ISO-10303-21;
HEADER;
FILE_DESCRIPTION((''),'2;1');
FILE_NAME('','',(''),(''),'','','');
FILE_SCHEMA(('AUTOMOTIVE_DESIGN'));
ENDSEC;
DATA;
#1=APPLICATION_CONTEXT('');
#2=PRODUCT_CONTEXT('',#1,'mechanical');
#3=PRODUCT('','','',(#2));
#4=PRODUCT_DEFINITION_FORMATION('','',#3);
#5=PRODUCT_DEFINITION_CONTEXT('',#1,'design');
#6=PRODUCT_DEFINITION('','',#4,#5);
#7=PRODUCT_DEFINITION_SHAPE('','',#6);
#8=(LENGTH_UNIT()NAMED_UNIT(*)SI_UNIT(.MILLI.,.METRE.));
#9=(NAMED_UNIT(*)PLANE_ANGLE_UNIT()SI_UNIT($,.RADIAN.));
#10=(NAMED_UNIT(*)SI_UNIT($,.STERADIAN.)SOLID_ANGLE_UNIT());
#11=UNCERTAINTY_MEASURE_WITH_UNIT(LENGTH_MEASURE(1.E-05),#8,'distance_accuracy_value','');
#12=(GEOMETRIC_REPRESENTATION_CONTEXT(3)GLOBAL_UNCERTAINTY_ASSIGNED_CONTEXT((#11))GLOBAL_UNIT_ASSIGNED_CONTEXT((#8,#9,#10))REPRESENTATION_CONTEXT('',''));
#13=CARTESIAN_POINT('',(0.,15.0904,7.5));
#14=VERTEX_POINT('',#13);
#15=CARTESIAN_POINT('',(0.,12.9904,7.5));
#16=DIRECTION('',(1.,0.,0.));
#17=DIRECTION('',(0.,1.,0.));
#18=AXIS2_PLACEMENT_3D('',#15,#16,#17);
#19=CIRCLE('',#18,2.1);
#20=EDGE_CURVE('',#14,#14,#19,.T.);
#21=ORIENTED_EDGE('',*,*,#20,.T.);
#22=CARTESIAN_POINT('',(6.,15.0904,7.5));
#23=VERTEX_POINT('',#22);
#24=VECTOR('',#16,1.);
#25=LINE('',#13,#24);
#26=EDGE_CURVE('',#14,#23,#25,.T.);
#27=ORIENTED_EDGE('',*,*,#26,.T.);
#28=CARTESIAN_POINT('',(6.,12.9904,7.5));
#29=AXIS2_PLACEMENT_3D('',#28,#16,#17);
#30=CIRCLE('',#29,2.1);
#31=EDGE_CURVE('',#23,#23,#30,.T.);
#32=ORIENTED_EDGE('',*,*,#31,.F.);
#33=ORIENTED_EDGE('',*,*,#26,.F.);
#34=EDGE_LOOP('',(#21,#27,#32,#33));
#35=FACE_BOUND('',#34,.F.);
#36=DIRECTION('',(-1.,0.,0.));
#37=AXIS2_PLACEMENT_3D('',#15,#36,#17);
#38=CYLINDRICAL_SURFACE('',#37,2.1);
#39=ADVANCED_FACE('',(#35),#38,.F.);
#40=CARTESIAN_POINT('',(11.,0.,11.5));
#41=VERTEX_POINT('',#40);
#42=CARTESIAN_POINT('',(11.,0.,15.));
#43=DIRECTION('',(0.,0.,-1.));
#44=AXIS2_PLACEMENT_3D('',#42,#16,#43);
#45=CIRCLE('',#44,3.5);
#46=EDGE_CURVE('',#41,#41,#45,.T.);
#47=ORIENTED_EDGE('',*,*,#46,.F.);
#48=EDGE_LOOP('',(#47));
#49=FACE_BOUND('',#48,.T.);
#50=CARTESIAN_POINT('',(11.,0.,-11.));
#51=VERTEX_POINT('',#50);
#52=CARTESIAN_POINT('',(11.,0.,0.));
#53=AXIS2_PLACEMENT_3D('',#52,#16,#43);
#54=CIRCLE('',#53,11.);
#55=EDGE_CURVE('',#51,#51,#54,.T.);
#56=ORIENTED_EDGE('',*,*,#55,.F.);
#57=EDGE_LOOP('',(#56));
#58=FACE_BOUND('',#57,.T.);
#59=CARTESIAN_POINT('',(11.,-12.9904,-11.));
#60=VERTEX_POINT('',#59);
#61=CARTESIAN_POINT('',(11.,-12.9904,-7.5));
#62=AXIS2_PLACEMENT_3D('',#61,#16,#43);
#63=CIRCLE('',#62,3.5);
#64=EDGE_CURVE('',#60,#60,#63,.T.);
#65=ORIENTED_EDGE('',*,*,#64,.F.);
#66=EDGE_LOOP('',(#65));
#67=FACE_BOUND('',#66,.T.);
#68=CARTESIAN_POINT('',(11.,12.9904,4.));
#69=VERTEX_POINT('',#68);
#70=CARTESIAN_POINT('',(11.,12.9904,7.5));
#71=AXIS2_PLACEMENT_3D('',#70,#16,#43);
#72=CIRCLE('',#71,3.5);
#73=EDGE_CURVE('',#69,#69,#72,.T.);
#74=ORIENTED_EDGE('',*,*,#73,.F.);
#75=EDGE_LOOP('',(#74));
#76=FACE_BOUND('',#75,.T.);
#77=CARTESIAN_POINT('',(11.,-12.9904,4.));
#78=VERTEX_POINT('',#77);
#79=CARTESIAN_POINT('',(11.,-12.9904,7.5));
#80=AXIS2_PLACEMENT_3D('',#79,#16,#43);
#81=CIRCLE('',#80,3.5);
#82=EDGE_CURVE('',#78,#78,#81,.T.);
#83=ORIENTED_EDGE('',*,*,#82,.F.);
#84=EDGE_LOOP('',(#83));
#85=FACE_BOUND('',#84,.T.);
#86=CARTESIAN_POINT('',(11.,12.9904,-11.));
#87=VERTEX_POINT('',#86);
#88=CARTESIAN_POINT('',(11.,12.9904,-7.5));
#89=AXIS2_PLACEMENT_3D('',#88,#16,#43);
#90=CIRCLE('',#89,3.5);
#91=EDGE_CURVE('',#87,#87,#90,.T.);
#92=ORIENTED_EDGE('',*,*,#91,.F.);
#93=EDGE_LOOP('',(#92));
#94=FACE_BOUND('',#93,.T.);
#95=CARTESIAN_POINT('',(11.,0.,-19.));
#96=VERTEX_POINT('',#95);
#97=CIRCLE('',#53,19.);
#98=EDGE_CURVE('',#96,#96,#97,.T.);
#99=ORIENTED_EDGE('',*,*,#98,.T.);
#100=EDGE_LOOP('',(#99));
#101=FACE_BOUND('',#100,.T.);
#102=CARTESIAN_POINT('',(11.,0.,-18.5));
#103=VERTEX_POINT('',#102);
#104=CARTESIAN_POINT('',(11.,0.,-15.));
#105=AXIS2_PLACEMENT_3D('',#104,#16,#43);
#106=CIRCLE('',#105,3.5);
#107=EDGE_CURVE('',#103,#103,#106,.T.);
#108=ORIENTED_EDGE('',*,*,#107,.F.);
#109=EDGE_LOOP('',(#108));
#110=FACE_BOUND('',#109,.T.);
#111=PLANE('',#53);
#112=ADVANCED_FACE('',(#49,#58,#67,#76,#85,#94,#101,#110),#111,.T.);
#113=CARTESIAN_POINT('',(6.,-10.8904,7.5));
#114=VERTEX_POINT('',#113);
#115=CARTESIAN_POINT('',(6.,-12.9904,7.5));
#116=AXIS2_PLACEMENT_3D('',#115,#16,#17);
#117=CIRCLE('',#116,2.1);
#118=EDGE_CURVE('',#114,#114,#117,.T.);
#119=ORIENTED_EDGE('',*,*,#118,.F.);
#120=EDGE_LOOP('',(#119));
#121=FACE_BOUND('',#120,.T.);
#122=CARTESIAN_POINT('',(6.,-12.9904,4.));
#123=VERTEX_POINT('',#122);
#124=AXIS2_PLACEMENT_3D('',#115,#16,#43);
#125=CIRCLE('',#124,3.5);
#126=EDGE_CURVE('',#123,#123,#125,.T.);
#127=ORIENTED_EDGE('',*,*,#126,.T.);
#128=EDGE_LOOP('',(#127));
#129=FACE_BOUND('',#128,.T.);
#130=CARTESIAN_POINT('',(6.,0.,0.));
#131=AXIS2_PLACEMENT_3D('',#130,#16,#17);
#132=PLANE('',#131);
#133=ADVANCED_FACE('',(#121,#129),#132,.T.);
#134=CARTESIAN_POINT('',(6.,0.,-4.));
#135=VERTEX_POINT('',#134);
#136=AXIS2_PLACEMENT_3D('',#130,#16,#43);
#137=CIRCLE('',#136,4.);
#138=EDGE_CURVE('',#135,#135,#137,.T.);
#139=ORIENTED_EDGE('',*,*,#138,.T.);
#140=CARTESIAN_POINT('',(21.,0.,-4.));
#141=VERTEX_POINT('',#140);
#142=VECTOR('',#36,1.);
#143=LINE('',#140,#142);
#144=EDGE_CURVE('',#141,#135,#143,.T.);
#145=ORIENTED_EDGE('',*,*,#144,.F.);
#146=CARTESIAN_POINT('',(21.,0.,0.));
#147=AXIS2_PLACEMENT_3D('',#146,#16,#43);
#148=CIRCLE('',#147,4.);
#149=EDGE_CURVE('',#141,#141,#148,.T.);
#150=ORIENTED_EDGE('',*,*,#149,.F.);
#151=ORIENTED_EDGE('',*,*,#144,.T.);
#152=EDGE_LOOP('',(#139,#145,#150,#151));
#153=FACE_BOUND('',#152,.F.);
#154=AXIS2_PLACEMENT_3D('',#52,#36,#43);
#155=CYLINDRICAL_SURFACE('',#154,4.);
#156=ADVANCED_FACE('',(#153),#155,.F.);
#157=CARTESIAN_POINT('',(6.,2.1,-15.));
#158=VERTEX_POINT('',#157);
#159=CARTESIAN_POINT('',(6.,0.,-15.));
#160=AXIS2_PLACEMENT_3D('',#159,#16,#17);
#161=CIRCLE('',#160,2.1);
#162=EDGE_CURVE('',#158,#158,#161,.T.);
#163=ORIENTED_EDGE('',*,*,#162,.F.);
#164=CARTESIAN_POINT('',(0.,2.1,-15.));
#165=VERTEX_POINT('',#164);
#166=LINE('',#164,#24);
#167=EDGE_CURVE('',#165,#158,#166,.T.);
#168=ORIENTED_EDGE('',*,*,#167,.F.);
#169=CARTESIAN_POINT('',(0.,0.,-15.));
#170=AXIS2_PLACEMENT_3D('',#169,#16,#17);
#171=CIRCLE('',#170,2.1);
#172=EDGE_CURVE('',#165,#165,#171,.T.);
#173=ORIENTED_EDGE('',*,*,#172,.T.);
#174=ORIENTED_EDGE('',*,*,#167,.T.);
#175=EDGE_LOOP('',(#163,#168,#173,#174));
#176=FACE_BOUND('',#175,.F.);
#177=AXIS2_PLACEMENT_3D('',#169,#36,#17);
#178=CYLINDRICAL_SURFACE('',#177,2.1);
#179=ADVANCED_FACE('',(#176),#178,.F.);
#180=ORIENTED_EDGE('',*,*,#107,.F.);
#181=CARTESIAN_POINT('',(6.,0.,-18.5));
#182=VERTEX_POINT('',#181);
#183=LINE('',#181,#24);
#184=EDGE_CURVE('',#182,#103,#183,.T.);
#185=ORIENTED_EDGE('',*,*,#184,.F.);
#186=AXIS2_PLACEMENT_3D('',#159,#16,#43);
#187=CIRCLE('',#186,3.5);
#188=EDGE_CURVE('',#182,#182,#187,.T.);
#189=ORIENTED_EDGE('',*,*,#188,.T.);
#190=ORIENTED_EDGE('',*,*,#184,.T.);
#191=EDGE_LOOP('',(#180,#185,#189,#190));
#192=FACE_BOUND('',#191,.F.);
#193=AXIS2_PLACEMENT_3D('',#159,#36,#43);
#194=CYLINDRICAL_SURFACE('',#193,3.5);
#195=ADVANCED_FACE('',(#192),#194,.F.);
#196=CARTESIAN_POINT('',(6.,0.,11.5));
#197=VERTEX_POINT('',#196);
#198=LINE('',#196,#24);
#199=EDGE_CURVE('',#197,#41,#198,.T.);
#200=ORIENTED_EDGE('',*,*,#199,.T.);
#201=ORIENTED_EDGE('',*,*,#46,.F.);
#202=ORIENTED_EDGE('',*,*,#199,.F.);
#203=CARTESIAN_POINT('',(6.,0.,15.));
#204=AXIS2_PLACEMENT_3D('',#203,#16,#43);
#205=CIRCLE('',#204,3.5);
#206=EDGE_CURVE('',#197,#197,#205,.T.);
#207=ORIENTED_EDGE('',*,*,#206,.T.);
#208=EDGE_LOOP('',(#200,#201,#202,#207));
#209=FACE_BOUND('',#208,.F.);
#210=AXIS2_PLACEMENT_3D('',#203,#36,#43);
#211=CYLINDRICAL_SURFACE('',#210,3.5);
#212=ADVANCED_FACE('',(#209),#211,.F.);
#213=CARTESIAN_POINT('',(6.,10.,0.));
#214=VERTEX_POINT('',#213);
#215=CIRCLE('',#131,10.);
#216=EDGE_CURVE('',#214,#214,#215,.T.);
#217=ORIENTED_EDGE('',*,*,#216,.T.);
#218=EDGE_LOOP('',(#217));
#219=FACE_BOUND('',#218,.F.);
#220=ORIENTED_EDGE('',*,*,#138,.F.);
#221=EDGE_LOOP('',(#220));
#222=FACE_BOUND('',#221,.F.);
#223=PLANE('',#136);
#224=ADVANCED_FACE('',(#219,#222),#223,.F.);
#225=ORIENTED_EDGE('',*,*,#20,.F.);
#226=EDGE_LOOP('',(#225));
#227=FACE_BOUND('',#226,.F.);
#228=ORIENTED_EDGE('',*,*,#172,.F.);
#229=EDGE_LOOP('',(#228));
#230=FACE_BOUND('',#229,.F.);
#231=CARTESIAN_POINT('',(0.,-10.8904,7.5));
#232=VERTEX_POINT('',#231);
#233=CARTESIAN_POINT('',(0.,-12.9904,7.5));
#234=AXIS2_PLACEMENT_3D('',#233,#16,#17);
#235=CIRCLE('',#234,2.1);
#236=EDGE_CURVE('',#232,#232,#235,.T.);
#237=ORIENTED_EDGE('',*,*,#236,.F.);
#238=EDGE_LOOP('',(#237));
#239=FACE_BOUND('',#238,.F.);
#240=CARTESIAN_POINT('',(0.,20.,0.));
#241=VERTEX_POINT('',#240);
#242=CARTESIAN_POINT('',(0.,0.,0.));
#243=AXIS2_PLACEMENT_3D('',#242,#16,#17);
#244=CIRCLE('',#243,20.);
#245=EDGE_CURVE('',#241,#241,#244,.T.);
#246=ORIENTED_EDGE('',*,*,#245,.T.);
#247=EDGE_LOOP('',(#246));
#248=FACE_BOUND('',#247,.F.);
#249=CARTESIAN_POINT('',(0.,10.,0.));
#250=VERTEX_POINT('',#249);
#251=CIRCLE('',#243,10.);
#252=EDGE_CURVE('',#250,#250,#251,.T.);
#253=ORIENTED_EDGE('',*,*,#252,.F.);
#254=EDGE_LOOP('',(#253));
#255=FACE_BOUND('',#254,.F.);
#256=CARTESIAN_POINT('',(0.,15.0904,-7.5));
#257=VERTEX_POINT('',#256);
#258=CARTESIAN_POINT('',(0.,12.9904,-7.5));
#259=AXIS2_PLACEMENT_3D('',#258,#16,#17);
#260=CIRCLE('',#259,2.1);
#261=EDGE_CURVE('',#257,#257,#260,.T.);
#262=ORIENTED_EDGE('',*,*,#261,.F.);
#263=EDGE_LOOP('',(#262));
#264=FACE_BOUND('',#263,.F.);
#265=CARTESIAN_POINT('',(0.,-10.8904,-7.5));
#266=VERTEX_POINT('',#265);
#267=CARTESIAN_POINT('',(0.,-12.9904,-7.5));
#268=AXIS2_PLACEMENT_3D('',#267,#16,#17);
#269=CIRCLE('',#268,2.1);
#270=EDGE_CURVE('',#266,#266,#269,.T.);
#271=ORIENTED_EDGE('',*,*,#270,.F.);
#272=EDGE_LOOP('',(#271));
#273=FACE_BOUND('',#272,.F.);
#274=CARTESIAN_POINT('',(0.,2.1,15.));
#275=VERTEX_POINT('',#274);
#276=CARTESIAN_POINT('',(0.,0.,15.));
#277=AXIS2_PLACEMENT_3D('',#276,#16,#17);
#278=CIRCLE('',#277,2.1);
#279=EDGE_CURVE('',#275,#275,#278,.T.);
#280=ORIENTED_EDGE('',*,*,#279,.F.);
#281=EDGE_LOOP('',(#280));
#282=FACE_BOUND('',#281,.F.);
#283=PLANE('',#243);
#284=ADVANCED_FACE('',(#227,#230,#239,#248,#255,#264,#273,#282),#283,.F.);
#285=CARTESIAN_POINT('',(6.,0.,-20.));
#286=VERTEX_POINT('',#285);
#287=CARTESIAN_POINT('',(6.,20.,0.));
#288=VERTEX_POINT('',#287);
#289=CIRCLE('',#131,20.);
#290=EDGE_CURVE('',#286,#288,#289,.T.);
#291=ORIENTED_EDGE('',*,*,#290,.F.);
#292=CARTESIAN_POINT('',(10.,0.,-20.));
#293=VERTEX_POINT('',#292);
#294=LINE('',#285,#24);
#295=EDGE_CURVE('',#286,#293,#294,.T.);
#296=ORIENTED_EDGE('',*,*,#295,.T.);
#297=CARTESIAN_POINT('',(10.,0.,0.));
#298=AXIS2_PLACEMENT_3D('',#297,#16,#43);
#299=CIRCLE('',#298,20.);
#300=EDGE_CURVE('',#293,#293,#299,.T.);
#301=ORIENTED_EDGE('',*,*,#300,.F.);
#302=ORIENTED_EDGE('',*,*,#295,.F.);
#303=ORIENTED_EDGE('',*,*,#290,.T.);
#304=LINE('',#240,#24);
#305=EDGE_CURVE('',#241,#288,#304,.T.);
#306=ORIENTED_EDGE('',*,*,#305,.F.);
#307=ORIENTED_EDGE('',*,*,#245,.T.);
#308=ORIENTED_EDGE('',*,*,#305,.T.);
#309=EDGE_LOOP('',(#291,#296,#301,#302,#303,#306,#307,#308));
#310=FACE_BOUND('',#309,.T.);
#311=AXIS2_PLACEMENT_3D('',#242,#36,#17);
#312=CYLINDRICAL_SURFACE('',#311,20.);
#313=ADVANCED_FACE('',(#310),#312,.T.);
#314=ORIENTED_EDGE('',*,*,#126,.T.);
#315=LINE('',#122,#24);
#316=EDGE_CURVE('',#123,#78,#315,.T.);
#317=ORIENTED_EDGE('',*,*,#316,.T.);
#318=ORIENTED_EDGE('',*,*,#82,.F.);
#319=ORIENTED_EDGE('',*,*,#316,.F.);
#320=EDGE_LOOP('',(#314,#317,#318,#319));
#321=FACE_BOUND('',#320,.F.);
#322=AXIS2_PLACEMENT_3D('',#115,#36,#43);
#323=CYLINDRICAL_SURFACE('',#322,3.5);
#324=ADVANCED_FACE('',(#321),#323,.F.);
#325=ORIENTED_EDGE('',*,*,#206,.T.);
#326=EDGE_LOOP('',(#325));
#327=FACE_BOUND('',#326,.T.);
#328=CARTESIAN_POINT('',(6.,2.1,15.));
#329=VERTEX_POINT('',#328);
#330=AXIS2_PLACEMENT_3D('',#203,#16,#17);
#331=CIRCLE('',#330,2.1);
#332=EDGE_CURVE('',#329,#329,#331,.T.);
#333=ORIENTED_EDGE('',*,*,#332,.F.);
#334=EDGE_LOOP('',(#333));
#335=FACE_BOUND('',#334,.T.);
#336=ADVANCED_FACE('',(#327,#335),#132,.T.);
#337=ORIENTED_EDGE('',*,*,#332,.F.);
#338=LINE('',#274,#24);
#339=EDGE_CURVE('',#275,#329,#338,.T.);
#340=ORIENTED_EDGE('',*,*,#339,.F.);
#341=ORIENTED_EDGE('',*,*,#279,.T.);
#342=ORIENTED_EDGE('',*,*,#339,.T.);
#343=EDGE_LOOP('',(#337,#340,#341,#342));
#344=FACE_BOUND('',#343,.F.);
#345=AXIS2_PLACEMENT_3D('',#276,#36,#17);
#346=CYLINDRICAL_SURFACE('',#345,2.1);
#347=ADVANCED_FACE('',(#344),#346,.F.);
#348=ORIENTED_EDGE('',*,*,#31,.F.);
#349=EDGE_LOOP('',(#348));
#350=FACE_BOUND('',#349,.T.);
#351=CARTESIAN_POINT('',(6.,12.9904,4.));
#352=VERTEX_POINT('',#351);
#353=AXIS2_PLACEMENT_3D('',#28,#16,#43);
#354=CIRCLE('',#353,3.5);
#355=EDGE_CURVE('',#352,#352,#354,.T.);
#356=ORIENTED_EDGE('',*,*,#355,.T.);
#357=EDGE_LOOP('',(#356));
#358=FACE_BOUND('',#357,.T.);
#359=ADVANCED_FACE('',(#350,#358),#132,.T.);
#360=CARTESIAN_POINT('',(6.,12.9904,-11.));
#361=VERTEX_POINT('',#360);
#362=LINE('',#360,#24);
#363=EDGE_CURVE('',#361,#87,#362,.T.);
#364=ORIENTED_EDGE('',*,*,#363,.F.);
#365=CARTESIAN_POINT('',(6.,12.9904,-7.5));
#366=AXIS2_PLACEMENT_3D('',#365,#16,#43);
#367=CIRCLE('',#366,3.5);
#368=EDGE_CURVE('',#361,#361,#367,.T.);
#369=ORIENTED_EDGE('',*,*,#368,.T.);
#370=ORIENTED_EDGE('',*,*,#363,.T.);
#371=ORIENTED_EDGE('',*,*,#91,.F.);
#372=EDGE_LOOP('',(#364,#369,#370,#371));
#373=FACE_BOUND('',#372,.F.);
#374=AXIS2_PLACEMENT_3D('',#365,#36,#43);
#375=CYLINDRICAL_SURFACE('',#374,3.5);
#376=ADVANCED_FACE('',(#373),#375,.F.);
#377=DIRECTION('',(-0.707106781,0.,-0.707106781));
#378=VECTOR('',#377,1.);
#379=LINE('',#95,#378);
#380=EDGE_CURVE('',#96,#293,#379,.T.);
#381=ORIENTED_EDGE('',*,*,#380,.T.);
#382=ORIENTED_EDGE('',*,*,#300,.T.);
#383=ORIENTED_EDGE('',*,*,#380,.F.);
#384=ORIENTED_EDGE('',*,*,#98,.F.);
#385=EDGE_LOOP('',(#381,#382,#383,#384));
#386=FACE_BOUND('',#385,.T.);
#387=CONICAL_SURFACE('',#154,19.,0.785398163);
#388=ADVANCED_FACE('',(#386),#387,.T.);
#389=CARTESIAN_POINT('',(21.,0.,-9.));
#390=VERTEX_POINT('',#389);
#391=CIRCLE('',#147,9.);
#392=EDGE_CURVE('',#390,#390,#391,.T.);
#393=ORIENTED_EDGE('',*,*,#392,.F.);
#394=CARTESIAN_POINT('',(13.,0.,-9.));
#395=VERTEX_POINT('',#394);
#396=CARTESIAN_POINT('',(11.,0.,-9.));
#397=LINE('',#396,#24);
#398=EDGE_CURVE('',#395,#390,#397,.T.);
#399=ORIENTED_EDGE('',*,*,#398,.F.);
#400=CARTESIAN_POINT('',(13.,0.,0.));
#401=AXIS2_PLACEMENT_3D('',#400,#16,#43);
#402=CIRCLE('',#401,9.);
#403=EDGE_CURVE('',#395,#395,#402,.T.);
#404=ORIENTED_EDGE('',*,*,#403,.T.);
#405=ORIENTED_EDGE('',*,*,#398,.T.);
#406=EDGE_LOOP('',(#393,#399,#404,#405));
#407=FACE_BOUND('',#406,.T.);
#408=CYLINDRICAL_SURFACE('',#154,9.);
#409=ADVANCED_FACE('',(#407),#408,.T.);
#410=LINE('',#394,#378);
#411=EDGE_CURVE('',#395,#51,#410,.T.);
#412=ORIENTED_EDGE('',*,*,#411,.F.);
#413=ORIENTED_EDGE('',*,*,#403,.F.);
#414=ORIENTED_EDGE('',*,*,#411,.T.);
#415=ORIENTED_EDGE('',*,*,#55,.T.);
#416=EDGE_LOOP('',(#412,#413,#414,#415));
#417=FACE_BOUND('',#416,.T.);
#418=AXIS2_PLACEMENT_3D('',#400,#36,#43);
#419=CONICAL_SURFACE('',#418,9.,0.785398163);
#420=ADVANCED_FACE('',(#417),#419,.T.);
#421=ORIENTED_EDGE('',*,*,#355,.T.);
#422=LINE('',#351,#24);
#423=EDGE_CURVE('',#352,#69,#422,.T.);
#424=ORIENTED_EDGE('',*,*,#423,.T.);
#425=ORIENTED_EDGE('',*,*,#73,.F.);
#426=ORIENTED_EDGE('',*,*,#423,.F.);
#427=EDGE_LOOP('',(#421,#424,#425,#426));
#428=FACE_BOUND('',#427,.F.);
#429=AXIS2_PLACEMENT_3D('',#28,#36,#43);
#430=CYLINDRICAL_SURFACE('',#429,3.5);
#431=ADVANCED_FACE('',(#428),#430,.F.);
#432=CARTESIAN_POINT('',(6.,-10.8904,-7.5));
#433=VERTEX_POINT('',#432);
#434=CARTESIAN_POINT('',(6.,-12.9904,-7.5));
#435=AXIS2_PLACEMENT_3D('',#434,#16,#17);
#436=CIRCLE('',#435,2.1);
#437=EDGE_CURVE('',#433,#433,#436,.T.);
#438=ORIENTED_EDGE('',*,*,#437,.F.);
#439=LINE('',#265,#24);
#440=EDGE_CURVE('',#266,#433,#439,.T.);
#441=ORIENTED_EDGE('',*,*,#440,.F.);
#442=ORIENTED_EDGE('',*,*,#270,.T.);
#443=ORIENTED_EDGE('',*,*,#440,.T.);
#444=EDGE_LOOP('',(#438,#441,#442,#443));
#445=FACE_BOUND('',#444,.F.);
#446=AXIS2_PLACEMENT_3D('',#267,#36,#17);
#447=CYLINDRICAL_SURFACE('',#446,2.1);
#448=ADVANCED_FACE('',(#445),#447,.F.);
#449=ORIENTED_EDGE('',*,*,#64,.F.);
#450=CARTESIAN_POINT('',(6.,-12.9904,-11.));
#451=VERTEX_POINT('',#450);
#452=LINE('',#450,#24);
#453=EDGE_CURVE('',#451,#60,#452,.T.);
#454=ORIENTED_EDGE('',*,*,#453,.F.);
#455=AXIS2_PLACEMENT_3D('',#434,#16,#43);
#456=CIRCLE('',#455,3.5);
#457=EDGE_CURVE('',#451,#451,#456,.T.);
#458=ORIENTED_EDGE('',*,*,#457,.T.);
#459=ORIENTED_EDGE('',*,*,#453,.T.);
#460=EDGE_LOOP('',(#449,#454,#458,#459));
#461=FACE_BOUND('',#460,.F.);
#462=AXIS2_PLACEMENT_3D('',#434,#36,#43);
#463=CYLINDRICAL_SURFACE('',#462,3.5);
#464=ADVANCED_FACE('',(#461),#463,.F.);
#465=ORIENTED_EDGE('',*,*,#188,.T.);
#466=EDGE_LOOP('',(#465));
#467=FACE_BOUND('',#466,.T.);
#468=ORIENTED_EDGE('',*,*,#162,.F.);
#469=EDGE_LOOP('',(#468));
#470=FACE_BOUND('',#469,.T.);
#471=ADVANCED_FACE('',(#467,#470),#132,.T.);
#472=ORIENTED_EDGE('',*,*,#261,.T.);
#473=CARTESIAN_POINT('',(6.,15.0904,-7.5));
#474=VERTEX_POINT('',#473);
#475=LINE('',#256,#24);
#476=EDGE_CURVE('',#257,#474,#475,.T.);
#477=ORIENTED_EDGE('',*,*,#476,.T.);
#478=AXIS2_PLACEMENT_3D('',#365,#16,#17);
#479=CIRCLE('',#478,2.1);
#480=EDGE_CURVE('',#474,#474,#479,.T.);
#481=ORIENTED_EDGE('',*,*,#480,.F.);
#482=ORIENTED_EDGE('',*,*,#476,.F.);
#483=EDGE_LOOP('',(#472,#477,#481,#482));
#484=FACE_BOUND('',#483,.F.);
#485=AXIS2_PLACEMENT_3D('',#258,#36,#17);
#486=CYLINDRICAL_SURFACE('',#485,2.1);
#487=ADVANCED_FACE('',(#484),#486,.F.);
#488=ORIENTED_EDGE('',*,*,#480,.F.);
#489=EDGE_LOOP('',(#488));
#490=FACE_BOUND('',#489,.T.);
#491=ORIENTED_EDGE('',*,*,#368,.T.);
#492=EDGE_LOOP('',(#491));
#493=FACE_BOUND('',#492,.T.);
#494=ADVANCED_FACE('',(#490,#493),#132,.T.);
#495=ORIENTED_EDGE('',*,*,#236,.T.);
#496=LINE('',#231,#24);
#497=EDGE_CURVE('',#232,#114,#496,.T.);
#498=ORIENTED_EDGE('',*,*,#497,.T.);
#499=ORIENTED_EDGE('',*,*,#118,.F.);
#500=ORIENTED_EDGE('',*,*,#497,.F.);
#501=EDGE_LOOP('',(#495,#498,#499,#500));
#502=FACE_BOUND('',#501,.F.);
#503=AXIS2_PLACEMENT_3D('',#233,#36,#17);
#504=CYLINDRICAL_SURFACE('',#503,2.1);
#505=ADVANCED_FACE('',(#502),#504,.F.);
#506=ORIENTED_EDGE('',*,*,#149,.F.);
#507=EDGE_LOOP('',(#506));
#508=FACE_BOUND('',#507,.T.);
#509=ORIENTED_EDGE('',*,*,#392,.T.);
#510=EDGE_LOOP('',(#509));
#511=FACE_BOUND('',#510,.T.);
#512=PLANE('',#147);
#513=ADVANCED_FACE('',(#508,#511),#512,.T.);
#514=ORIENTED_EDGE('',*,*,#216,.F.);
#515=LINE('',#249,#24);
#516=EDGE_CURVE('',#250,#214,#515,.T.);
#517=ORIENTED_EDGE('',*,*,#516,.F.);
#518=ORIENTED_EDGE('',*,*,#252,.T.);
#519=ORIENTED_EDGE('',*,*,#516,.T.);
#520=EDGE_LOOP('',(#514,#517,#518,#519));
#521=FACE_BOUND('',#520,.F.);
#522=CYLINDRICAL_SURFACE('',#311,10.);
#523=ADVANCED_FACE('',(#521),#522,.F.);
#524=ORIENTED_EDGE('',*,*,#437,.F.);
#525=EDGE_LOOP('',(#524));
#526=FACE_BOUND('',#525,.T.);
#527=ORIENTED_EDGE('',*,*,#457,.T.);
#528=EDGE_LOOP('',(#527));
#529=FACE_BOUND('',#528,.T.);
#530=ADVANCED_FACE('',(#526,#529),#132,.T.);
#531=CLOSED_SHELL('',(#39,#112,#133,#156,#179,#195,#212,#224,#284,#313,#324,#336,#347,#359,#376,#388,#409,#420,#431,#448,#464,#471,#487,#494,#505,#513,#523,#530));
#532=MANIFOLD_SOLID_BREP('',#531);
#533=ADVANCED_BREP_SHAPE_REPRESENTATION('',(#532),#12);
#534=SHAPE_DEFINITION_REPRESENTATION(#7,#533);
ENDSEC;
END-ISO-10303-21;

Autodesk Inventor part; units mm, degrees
ref_plane "YZ Plane" through (0, 0, 0) normal (1, 0, 0) x (0, 1, 0)
ref_plane "XZ Plane" through (0, 0, 0) normal (0, 1, 0) x (-1, 0, 0)
ref_plane "XY Plane" through (0, 0, 0) normal (0, 0, 1) x (1, 0, 0)
sketch "草图1" plane through (0, 0, 0) normal (1, 0, 0) x (0, 1, 0)
  circle A0 centre (0, 0) radius 15 construction
  line L0 (0, 0) -> (0, -15) construction
  circle A1 centre (0, 0) radius 10
  circle A2 centre (0, -15) radius 2.1
  circle A3 centre (12.9904, -7.5) radius 2.1
  circle A4 centre (12.9904, 7.5) radius 2.1
  circle A5 centre (0, 15) radius 2.1
  circle A6 centre (-12.9904, 7.5) radius 2.1
  circle A7 centre (-12.9904, -7.5) radius 2.1
  circle A8 centre (0, 0) radius 20
  dimension "d0" = 30
  dimension "d1" = 20
  dimension "d2" = 4.2
  dimension "d5" = 360
  dimension "d7" = 40
extrude "拉伸1" add sketch "草图1" along normal blind 6
sketch "草图2" plane through (6, 0, 0) normal (1, 0, 0) x (0, 0, -1)
  circle A0 centre (0, 0) radius 4
  circle A1 centre (0, 0) radius 20 projected
  circle A2 centre (15, 0) radius 2.1 projected
  circle A3 centre (15, 0) radius 3.5
  circle A4 centre (7.5, 12.9904) radius 3.5
  circle A5 centre (-7.5, 12.9904) radius 3.5
  circle A6 centre (-15, 0) radius 3.5
  circle A7 centre (-7.5, -12.9904) radius 3.5
  circle A8 centre (7.5, -12.9904) radius 3.5
  dimension "d10" = 8
  dimension "d11" = 7
  dimension "d14" = 360
extrude "拉伸2" add sketch "草图2" along normal blind 5 contours A1
sketch "草图3" plane through (11, 0, 0) normal (1, 0, 0) x (0, 0, -1)
  circle A0 centre (0, 0) radius 4 projected
  circle A1 centre (0, 0) radius 9
  dimension "d18" = 18
extrude "拉伸3" add sketch "草图3" along normal blind 10
chamfer "倒角1" distance 2 angle 45 1 edges at (11, 0, 9)
chamfer "倒角2" distance 1 angle 45 1 edges at (11, 0, 20)
properties part number "链轮摇臂座"
